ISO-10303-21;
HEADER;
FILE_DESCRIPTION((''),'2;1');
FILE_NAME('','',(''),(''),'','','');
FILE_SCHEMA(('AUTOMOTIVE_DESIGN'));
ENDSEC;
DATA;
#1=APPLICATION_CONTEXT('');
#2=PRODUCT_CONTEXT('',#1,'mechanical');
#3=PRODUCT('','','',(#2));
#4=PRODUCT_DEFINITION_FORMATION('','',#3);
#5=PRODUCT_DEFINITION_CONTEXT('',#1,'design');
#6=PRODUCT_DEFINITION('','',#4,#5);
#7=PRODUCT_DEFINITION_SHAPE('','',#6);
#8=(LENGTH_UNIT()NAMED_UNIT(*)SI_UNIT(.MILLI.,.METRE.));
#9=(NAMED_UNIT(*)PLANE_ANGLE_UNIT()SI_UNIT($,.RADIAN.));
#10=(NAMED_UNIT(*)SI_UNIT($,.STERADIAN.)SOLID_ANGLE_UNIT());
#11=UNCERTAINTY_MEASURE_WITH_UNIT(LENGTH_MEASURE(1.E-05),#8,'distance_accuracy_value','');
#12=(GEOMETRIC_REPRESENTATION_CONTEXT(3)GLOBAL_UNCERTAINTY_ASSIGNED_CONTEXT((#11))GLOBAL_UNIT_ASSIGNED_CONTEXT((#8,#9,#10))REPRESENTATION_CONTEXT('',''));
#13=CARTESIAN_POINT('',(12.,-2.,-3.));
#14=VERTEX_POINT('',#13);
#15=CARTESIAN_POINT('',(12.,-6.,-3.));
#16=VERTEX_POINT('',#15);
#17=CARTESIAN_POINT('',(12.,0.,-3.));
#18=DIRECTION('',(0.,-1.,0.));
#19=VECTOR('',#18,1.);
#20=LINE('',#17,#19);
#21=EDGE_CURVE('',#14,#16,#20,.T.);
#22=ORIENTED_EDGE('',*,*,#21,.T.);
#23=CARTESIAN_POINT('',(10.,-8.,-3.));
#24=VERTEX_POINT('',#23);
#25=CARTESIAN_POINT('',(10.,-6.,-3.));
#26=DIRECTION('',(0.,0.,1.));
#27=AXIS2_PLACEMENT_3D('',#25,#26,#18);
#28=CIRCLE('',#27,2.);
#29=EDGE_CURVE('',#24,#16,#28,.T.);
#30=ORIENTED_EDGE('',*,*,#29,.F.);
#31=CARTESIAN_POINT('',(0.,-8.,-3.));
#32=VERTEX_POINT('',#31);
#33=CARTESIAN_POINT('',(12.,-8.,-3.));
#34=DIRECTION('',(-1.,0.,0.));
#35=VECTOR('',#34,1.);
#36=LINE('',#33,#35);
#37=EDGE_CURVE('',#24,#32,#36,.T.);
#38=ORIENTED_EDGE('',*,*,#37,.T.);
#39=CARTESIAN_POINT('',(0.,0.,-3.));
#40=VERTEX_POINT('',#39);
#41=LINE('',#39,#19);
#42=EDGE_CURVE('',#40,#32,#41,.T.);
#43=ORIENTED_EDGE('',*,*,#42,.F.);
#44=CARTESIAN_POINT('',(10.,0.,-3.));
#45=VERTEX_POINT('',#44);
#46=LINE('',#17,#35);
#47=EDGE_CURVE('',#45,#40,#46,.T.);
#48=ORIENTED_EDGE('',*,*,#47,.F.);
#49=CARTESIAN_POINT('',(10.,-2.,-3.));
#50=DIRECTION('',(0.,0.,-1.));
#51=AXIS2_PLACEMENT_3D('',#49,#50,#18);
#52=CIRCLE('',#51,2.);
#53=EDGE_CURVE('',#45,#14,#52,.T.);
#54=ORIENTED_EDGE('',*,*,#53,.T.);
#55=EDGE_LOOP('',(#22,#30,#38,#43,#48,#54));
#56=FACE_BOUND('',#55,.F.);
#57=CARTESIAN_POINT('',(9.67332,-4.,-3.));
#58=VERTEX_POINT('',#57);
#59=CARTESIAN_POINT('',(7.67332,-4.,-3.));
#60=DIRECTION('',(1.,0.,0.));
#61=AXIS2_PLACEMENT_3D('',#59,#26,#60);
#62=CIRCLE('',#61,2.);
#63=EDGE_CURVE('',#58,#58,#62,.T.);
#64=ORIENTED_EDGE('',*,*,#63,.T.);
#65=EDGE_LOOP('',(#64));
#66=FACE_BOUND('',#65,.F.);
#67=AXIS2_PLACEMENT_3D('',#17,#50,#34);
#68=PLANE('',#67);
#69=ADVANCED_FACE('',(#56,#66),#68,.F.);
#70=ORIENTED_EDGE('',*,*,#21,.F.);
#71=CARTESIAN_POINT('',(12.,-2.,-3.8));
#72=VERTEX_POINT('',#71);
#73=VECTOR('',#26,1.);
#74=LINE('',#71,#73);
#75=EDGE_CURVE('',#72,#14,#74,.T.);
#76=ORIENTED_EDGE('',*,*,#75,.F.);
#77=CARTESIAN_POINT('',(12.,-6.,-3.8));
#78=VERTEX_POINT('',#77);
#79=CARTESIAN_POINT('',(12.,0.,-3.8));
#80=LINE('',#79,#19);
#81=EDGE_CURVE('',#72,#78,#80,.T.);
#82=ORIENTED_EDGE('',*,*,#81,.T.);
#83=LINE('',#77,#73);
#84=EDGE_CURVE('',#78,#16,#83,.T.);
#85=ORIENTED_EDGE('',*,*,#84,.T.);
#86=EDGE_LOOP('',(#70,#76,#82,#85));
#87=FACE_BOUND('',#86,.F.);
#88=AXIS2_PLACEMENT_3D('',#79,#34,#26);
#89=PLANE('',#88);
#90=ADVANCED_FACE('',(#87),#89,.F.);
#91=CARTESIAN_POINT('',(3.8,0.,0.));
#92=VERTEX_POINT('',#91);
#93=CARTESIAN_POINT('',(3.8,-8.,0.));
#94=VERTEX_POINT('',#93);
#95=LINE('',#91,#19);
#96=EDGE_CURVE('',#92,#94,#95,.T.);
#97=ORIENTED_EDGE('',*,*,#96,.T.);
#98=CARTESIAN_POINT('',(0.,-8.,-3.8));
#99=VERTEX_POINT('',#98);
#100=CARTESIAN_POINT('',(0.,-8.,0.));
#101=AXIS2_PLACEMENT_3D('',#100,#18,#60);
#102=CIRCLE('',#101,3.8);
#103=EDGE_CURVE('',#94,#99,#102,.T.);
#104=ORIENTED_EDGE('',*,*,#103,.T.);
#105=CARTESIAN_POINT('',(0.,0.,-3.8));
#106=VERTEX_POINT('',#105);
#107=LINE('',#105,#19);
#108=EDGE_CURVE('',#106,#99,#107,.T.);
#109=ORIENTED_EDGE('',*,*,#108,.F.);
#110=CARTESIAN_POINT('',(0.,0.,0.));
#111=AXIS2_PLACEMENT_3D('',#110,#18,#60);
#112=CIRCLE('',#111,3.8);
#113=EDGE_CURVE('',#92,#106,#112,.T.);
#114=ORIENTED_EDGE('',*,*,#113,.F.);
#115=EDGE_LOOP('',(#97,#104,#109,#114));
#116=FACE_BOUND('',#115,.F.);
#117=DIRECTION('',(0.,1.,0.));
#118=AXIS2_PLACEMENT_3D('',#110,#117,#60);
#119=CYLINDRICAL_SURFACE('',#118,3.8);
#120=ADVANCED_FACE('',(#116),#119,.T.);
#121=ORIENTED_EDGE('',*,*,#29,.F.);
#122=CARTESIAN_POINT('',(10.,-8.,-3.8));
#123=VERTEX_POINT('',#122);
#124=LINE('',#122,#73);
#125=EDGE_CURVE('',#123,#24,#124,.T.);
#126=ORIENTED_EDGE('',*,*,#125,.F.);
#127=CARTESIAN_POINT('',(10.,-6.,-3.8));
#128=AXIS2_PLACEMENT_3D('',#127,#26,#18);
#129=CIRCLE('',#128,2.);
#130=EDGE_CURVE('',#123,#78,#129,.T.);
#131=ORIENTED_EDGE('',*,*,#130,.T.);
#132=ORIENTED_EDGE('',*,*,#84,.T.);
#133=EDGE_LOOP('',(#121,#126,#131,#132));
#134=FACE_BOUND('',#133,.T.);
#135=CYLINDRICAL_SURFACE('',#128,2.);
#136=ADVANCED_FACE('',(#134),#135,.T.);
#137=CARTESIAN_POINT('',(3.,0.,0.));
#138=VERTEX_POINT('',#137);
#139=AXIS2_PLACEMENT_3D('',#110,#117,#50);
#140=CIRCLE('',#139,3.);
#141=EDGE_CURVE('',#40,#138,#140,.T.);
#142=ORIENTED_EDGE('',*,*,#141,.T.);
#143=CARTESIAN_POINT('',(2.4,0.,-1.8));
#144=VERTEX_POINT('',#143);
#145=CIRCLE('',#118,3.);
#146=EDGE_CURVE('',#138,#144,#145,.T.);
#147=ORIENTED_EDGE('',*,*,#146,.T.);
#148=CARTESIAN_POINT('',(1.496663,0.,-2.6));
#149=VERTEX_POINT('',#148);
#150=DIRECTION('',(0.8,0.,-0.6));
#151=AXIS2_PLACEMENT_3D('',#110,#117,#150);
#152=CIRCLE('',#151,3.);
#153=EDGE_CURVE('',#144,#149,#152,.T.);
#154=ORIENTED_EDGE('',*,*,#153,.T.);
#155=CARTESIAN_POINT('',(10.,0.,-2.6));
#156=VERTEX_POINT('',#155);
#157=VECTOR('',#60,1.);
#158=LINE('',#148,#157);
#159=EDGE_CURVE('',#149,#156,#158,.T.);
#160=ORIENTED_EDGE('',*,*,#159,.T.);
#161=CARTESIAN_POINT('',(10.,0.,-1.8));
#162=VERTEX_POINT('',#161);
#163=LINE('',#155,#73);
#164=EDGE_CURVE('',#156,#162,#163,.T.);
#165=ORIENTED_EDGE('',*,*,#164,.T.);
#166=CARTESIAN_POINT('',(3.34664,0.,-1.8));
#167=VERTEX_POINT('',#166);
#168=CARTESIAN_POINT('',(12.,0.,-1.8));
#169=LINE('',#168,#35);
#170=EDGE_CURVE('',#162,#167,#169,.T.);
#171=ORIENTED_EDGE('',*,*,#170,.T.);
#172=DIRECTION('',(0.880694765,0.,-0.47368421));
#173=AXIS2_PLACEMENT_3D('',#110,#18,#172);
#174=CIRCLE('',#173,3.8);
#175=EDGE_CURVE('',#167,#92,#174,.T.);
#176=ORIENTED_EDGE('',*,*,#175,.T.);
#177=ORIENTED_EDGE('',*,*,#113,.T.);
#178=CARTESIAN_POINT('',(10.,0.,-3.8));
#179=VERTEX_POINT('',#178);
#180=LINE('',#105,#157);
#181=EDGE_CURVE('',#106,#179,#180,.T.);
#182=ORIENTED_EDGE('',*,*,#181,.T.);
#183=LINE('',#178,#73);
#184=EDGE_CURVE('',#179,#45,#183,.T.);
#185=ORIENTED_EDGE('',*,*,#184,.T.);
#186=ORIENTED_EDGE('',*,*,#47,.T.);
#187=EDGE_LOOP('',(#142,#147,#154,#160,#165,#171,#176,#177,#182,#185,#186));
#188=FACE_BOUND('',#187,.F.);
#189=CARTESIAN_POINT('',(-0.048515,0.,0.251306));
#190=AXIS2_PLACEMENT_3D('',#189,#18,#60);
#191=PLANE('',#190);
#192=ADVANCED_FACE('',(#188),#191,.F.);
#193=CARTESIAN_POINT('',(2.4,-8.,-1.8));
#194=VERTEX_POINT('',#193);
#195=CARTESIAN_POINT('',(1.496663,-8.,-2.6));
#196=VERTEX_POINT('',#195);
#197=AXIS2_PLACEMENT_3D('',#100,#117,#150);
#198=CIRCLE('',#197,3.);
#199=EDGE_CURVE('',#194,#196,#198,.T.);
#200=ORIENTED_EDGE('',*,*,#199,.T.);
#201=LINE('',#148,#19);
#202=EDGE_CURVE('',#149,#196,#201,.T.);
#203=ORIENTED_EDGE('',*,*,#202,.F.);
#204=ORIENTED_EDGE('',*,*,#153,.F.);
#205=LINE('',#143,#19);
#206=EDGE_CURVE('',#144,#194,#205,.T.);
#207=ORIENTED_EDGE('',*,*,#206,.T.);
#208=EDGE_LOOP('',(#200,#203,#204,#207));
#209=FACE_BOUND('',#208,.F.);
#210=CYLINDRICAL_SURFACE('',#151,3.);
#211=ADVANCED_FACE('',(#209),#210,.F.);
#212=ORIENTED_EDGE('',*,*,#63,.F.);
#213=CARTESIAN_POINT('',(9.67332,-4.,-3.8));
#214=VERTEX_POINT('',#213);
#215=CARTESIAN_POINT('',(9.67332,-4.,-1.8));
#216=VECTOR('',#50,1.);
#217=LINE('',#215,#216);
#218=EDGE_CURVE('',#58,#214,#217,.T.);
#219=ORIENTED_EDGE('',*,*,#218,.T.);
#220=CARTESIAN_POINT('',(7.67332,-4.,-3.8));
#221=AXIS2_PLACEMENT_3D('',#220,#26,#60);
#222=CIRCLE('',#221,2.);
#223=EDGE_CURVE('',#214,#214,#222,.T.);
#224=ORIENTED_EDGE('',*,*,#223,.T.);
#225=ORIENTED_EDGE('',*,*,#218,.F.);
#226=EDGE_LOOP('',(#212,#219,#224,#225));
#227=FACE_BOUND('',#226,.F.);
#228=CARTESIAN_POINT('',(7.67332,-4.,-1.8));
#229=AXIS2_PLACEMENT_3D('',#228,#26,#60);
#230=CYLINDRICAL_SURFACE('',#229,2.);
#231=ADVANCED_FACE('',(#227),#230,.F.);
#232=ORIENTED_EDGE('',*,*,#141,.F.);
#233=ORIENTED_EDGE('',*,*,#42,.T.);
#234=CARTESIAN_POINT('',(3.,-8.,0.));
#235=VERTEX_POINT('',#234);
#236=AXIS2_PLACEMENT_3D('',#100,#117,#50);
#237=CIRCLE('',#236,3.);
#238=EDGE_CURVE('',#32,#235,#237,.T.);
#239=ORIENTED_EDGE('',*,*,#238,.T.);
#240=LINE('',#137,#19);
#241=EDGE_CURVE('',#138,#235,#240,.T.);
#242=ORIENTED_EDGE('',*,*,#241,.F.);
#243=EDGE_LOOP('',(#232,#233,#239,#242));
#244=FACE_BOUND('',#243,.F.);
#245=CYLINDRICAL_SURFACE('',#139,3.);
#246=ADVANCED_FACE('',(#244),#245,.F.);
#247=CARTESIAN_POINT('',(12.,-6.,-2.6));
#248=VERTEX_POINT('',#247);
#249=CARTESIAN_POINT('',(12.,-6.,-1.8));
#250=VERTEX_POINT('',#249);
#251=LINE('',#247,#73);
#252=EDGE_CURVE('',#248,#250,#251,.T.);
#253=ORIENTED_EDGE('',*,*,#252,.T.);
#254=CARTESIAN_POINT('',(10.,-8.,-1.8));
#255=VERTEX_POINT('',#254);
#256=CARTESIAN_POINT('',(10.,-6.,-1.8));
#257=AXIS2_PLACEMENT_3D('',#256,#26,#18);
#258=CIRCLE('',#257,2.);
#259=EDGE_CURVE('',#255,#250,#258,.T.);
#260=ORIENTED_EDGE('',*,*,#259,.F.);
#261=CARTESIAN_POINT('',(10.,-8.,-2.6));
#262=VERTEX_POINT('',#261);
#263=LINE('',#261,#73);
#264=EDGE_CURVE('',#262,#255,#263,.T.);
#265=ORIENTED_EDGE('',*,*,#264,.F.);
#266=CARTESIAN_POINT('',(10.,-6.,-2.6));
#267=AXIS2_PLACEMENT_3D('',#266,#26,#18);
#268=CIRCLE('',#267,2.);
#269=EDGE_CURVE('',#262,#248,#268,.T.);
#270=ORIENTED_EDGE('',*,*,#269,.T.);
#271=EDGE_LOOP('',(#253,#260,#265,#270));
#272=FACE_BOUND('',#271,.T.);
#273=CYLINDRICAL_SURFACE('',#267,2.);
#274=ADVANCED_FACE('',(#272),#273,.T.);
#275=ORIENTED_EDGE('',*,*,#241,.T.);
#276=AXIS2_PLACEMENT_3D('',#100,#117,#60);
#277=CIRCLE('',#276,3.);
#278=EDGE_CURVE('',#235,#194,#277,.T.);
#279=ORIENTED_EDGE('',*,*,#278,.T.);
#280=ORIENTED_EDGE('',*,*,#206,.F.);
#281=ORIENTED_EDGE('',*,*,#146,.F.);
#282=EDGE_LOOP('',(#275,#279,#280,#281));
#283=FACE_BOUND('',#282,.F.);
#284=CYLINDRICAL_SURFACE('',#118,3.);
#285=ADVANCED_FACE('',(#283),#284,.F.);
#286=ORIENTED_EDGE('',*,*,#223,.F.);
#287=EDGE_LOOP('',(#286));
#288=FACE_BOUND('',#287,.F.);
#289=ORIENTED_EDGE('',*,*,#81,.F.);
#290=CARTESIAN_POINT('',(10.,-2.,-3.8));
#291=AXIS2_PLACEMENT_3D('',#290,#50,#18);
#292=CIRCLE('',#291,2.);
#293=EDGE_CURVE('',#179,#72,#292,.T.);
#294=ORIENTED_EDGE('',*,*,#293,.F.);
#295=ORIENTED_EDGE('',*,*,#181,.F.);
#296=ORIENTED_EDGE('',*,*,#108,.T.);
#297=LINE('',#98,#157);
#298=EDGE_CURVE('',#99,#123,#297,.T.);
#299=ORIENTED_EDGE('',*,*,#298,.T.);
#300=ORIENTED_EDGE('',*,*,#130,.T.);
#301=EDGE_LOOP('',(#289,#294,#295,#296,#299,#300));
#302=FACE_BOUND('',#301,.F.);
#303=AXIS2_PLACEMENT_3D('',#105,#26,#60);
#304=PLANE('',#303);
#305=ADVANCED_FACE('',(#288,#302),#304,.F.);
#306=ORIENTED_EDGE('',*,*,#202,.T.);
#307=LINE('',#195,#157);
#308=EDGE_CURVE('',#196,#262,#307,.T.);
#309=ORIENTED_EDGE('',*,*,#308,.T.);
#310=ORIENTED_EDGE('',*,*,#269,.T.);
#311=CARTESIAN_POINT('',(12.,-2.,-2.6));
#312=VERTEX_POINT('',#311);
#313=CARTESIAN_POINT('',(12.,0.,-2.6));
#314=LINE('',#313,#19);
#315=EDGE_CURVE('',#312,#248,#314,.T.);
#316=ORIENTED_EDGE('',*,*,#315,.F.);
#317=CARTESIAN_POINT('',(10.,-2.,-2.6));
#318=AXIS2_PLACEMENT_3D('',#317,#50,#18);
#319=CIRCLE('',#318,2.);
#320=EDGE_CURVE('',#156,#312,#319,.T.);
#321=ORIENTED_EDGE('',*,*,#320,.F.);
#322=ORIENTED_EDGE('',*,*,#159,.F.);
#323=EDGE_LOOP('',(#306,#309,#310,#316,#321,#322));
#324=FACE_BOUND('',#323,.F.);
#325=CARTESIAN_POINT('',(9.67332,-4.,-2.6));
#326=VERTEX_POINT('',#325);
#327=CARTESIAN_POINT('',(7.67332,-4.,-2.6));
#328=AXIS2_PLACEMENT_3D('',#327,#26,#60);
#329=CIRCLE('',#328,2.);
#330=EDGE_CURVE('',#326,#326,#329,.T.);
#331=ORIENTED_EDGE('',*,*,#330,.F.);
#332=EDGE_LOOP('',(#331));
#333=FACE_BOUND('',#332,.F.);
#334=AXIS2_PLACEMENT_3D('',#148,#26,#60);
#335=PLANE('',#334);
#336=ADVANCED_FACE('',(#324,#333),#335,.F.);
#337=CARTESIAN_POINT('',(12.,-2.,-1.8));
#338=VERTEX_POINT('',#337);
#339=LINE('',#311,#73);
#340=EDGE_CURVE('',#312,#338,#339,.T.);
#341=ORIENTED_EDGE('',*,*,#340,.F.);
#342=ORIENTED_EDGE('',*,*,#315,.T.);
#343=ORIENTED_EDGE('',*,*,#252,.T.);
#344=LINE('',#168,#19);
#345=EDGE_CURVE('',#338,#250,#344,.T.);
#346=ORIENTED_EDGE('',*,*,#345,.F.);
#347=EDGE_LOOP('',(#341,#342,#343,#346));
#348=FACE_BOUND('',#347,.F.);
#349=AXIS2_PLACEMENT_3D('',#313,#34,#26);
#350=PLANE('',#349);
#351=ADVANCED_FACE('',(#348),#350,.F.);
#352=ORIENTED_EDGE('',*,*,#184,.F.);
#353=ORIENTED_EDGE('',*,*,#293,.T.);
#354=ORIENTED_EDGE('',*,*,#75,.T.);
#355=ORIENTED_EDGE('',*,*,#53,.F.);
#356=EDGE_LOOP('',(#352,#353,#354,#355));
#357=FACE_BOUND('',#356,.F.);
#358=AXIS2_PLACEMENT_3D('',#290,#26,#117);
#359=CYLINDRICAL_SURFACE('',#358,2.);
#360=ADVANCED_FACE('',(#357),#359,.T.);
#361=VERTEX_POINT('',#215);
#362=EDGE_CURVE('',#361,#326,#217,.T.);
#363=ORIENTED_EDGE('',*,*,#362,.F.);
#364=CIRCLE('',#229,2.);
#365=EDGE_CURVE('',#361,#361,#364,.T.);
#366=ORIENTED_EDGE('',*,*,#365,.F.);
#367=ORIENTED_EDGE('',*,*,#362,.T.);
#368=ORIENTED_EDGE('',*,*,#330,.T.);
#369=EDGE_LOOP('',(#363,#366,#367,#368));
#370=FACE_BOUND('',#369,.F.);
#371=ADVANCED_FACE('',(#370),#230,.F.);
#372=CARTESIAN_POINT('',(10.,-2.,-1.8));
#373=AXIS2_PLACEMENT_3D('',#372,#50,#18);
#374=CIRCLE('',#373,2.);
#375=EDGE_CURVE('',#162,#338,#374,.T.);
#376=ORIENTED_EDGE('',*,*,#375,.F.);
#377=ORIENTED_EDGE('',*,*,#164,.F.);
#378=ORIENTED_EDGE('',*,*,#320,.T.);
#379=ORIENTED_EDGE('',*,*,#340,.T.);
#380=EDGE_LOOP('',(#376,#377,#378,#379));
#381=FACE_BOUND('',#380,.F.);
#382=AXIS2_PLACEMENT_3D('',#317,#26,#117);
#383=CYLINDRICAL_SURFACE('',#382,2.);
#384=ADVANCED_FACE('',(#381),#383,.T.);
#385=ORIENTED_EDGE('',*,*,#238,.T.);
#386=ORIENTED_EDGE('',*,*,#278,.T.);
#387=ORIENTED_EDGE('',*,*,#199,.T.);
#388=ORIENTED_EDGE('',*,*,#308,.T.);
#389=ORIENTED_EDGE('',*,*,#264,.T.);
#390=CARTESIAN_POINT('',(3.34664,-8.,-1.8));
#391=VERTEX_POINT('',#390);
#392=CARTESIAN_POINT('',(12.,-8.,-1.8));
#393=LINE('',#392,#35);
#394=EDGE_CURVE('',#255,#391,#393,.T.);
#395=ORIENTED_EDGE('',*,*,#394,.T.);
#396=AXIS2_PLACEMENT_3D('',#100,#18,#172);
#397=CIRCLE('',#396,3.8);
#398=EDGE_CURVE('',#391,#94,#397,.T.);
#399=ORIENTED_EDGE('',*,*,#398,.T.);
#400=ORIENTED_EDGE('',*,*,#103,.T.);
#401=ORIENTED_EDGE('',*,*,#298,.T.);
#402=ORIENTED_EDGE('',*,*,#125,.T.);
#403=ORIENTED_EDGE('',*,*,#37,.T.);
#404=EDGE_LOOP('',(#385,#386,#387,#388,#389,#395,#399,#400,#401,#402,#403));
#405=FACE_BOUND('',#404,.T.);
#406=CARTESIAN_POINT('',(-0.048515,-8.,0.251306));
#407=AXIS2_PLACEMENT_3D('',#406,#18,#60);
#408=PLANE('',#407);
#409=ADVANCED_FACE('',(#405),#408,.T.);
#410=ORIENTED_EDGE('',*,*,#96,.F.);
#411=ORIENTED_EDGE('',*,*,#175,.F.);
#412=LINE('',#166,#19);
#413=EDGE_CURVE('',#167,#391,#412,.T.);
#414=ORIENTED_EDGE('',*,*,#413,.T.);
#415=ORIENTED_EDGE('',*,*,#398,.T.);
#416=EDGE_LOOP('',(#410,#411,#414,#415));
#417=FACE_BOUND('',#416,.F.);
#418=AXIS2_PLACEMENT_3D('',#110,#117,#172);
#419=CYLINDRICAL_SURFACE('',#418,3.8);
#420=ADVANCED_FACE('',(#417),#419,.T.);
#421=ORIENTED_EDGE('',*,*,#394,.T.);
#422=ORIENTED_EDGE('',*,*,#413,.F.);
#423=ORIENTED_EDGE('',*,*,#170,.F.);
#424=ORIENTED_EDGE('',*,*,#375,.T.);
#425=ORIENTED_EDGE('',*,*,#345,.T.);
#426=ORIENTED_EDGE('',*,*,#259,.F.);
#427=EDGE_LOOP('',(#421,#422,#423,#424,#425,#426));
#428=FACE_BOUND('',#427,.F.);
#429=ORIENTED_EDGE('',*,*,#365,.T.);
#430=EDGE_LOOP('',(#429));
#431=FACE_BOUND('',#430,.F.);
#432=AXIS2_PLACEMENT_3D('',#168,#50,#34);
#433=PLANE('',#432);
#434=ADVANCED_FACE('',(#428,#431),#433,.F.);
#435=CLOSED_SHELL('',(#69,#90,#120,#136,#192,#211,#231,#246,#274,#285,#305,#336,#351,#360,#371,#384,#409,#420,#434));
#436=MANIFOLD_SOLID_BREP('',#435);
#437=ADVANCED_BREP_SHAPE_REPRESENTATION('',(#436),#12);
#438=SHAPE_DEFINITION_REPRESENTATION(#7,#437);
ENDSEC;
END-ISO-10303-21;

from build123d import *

# Parameters (mm, degrees)
F1_DEPTH = 8
F2_R     = 2
F3_DEPTH = 25
F4_R     = 2


# Not quite as in the source:
# - a feature names something its author has since deleted; it is built from what else it names


with BuildPart() as f1:
    # F0 (on Front) → F1 (new body)
    with BuildSketch(Plane.XZ):
        with BuildLine():
            ThreePointArc((0, -3), (-2.1213203436, 2.1213203436), (3, 0))
            ThreePointArc((3, 0), (2.8460498942, -0.9486832981), (2.4, -1.8))
            Line((2.4, -1.8), (3.3466401061, -1.8))
            ThreePointArc((3.3466401061, -1.8), (3.6849173941, -0.9281076437), (3.8, 0))
            ThreePointArc((3.8, 0), (-2.6870057685, 2.6870057685), (0, -3.8))
            Line((0, -3.8), (0, -3))
        make_face()
        with BuildLine():
            Line((2.3323807579, -3), (0, -3))
            Line((0, -3), (0, -3.8))
            ThreePointArc((0, -3.8), (1.2328828006, -3.5944401511), (2.3323807579, -3))
        make_face()
        with BuildLine():
            Line((3.3466401061, -1.8), (2.4, -1.8))
            ThreePointArc((2.4, -1.8), (1.9889684627, -2.2458861178), (1.4966629547, -2.6))
            Line((1.4966629547, -2.6), (2.7712812921, -2.6))
            ThreePointArc((2.7712812921, -2.6), (3.0850025217, -2.2187292402), (3.3466401061, -1.8))
        make_face()
        with BuildLine():
            Line((12, -3), (2.3323807579, -3))
            ThreePointArc((2.3323807579, -3), (1.2328828006, -3.5944401511), (0, -3.8))
            Line((0, -3.8), (12, -3.8))
            Line((12, -3.8), (12, -3))
        make_face()
        with BuildLine():
            Line((12, -1.8), (3.3466401061, -1.8))
            ThreePointArc((3.3466401061, -1.8), (3.0850025217, -2.2187292402), (2.7712812921, -2.6))
            Line((2.7712812921, -2.6), (12, -2.6))
            Line((12, -2.6), (12, -1.8))
        make_face()
    extrude(amount=F1_DEPTH)

    # F2 (on face) → F3 (cut)
    with BuildSketch(Plane.XY.offset(-1.8)):
        with Locations((7.6733200531, -4)):
            Circle(F2_R)
    extrude(amount=-F3_DEPTH, mode=Mode.SUBTRACT)

    # F4
    f4_edges = [f1.edges().sort_by_distance(p)[0] for p in [
        (12, -8, -2.2),
        (12, -8, -3.4),
        (12, 0, -3.4),
        (12, 0, -2.2),
    ]]
    fillet(f4_edges, radius=F4_R)


solid = f1.part
